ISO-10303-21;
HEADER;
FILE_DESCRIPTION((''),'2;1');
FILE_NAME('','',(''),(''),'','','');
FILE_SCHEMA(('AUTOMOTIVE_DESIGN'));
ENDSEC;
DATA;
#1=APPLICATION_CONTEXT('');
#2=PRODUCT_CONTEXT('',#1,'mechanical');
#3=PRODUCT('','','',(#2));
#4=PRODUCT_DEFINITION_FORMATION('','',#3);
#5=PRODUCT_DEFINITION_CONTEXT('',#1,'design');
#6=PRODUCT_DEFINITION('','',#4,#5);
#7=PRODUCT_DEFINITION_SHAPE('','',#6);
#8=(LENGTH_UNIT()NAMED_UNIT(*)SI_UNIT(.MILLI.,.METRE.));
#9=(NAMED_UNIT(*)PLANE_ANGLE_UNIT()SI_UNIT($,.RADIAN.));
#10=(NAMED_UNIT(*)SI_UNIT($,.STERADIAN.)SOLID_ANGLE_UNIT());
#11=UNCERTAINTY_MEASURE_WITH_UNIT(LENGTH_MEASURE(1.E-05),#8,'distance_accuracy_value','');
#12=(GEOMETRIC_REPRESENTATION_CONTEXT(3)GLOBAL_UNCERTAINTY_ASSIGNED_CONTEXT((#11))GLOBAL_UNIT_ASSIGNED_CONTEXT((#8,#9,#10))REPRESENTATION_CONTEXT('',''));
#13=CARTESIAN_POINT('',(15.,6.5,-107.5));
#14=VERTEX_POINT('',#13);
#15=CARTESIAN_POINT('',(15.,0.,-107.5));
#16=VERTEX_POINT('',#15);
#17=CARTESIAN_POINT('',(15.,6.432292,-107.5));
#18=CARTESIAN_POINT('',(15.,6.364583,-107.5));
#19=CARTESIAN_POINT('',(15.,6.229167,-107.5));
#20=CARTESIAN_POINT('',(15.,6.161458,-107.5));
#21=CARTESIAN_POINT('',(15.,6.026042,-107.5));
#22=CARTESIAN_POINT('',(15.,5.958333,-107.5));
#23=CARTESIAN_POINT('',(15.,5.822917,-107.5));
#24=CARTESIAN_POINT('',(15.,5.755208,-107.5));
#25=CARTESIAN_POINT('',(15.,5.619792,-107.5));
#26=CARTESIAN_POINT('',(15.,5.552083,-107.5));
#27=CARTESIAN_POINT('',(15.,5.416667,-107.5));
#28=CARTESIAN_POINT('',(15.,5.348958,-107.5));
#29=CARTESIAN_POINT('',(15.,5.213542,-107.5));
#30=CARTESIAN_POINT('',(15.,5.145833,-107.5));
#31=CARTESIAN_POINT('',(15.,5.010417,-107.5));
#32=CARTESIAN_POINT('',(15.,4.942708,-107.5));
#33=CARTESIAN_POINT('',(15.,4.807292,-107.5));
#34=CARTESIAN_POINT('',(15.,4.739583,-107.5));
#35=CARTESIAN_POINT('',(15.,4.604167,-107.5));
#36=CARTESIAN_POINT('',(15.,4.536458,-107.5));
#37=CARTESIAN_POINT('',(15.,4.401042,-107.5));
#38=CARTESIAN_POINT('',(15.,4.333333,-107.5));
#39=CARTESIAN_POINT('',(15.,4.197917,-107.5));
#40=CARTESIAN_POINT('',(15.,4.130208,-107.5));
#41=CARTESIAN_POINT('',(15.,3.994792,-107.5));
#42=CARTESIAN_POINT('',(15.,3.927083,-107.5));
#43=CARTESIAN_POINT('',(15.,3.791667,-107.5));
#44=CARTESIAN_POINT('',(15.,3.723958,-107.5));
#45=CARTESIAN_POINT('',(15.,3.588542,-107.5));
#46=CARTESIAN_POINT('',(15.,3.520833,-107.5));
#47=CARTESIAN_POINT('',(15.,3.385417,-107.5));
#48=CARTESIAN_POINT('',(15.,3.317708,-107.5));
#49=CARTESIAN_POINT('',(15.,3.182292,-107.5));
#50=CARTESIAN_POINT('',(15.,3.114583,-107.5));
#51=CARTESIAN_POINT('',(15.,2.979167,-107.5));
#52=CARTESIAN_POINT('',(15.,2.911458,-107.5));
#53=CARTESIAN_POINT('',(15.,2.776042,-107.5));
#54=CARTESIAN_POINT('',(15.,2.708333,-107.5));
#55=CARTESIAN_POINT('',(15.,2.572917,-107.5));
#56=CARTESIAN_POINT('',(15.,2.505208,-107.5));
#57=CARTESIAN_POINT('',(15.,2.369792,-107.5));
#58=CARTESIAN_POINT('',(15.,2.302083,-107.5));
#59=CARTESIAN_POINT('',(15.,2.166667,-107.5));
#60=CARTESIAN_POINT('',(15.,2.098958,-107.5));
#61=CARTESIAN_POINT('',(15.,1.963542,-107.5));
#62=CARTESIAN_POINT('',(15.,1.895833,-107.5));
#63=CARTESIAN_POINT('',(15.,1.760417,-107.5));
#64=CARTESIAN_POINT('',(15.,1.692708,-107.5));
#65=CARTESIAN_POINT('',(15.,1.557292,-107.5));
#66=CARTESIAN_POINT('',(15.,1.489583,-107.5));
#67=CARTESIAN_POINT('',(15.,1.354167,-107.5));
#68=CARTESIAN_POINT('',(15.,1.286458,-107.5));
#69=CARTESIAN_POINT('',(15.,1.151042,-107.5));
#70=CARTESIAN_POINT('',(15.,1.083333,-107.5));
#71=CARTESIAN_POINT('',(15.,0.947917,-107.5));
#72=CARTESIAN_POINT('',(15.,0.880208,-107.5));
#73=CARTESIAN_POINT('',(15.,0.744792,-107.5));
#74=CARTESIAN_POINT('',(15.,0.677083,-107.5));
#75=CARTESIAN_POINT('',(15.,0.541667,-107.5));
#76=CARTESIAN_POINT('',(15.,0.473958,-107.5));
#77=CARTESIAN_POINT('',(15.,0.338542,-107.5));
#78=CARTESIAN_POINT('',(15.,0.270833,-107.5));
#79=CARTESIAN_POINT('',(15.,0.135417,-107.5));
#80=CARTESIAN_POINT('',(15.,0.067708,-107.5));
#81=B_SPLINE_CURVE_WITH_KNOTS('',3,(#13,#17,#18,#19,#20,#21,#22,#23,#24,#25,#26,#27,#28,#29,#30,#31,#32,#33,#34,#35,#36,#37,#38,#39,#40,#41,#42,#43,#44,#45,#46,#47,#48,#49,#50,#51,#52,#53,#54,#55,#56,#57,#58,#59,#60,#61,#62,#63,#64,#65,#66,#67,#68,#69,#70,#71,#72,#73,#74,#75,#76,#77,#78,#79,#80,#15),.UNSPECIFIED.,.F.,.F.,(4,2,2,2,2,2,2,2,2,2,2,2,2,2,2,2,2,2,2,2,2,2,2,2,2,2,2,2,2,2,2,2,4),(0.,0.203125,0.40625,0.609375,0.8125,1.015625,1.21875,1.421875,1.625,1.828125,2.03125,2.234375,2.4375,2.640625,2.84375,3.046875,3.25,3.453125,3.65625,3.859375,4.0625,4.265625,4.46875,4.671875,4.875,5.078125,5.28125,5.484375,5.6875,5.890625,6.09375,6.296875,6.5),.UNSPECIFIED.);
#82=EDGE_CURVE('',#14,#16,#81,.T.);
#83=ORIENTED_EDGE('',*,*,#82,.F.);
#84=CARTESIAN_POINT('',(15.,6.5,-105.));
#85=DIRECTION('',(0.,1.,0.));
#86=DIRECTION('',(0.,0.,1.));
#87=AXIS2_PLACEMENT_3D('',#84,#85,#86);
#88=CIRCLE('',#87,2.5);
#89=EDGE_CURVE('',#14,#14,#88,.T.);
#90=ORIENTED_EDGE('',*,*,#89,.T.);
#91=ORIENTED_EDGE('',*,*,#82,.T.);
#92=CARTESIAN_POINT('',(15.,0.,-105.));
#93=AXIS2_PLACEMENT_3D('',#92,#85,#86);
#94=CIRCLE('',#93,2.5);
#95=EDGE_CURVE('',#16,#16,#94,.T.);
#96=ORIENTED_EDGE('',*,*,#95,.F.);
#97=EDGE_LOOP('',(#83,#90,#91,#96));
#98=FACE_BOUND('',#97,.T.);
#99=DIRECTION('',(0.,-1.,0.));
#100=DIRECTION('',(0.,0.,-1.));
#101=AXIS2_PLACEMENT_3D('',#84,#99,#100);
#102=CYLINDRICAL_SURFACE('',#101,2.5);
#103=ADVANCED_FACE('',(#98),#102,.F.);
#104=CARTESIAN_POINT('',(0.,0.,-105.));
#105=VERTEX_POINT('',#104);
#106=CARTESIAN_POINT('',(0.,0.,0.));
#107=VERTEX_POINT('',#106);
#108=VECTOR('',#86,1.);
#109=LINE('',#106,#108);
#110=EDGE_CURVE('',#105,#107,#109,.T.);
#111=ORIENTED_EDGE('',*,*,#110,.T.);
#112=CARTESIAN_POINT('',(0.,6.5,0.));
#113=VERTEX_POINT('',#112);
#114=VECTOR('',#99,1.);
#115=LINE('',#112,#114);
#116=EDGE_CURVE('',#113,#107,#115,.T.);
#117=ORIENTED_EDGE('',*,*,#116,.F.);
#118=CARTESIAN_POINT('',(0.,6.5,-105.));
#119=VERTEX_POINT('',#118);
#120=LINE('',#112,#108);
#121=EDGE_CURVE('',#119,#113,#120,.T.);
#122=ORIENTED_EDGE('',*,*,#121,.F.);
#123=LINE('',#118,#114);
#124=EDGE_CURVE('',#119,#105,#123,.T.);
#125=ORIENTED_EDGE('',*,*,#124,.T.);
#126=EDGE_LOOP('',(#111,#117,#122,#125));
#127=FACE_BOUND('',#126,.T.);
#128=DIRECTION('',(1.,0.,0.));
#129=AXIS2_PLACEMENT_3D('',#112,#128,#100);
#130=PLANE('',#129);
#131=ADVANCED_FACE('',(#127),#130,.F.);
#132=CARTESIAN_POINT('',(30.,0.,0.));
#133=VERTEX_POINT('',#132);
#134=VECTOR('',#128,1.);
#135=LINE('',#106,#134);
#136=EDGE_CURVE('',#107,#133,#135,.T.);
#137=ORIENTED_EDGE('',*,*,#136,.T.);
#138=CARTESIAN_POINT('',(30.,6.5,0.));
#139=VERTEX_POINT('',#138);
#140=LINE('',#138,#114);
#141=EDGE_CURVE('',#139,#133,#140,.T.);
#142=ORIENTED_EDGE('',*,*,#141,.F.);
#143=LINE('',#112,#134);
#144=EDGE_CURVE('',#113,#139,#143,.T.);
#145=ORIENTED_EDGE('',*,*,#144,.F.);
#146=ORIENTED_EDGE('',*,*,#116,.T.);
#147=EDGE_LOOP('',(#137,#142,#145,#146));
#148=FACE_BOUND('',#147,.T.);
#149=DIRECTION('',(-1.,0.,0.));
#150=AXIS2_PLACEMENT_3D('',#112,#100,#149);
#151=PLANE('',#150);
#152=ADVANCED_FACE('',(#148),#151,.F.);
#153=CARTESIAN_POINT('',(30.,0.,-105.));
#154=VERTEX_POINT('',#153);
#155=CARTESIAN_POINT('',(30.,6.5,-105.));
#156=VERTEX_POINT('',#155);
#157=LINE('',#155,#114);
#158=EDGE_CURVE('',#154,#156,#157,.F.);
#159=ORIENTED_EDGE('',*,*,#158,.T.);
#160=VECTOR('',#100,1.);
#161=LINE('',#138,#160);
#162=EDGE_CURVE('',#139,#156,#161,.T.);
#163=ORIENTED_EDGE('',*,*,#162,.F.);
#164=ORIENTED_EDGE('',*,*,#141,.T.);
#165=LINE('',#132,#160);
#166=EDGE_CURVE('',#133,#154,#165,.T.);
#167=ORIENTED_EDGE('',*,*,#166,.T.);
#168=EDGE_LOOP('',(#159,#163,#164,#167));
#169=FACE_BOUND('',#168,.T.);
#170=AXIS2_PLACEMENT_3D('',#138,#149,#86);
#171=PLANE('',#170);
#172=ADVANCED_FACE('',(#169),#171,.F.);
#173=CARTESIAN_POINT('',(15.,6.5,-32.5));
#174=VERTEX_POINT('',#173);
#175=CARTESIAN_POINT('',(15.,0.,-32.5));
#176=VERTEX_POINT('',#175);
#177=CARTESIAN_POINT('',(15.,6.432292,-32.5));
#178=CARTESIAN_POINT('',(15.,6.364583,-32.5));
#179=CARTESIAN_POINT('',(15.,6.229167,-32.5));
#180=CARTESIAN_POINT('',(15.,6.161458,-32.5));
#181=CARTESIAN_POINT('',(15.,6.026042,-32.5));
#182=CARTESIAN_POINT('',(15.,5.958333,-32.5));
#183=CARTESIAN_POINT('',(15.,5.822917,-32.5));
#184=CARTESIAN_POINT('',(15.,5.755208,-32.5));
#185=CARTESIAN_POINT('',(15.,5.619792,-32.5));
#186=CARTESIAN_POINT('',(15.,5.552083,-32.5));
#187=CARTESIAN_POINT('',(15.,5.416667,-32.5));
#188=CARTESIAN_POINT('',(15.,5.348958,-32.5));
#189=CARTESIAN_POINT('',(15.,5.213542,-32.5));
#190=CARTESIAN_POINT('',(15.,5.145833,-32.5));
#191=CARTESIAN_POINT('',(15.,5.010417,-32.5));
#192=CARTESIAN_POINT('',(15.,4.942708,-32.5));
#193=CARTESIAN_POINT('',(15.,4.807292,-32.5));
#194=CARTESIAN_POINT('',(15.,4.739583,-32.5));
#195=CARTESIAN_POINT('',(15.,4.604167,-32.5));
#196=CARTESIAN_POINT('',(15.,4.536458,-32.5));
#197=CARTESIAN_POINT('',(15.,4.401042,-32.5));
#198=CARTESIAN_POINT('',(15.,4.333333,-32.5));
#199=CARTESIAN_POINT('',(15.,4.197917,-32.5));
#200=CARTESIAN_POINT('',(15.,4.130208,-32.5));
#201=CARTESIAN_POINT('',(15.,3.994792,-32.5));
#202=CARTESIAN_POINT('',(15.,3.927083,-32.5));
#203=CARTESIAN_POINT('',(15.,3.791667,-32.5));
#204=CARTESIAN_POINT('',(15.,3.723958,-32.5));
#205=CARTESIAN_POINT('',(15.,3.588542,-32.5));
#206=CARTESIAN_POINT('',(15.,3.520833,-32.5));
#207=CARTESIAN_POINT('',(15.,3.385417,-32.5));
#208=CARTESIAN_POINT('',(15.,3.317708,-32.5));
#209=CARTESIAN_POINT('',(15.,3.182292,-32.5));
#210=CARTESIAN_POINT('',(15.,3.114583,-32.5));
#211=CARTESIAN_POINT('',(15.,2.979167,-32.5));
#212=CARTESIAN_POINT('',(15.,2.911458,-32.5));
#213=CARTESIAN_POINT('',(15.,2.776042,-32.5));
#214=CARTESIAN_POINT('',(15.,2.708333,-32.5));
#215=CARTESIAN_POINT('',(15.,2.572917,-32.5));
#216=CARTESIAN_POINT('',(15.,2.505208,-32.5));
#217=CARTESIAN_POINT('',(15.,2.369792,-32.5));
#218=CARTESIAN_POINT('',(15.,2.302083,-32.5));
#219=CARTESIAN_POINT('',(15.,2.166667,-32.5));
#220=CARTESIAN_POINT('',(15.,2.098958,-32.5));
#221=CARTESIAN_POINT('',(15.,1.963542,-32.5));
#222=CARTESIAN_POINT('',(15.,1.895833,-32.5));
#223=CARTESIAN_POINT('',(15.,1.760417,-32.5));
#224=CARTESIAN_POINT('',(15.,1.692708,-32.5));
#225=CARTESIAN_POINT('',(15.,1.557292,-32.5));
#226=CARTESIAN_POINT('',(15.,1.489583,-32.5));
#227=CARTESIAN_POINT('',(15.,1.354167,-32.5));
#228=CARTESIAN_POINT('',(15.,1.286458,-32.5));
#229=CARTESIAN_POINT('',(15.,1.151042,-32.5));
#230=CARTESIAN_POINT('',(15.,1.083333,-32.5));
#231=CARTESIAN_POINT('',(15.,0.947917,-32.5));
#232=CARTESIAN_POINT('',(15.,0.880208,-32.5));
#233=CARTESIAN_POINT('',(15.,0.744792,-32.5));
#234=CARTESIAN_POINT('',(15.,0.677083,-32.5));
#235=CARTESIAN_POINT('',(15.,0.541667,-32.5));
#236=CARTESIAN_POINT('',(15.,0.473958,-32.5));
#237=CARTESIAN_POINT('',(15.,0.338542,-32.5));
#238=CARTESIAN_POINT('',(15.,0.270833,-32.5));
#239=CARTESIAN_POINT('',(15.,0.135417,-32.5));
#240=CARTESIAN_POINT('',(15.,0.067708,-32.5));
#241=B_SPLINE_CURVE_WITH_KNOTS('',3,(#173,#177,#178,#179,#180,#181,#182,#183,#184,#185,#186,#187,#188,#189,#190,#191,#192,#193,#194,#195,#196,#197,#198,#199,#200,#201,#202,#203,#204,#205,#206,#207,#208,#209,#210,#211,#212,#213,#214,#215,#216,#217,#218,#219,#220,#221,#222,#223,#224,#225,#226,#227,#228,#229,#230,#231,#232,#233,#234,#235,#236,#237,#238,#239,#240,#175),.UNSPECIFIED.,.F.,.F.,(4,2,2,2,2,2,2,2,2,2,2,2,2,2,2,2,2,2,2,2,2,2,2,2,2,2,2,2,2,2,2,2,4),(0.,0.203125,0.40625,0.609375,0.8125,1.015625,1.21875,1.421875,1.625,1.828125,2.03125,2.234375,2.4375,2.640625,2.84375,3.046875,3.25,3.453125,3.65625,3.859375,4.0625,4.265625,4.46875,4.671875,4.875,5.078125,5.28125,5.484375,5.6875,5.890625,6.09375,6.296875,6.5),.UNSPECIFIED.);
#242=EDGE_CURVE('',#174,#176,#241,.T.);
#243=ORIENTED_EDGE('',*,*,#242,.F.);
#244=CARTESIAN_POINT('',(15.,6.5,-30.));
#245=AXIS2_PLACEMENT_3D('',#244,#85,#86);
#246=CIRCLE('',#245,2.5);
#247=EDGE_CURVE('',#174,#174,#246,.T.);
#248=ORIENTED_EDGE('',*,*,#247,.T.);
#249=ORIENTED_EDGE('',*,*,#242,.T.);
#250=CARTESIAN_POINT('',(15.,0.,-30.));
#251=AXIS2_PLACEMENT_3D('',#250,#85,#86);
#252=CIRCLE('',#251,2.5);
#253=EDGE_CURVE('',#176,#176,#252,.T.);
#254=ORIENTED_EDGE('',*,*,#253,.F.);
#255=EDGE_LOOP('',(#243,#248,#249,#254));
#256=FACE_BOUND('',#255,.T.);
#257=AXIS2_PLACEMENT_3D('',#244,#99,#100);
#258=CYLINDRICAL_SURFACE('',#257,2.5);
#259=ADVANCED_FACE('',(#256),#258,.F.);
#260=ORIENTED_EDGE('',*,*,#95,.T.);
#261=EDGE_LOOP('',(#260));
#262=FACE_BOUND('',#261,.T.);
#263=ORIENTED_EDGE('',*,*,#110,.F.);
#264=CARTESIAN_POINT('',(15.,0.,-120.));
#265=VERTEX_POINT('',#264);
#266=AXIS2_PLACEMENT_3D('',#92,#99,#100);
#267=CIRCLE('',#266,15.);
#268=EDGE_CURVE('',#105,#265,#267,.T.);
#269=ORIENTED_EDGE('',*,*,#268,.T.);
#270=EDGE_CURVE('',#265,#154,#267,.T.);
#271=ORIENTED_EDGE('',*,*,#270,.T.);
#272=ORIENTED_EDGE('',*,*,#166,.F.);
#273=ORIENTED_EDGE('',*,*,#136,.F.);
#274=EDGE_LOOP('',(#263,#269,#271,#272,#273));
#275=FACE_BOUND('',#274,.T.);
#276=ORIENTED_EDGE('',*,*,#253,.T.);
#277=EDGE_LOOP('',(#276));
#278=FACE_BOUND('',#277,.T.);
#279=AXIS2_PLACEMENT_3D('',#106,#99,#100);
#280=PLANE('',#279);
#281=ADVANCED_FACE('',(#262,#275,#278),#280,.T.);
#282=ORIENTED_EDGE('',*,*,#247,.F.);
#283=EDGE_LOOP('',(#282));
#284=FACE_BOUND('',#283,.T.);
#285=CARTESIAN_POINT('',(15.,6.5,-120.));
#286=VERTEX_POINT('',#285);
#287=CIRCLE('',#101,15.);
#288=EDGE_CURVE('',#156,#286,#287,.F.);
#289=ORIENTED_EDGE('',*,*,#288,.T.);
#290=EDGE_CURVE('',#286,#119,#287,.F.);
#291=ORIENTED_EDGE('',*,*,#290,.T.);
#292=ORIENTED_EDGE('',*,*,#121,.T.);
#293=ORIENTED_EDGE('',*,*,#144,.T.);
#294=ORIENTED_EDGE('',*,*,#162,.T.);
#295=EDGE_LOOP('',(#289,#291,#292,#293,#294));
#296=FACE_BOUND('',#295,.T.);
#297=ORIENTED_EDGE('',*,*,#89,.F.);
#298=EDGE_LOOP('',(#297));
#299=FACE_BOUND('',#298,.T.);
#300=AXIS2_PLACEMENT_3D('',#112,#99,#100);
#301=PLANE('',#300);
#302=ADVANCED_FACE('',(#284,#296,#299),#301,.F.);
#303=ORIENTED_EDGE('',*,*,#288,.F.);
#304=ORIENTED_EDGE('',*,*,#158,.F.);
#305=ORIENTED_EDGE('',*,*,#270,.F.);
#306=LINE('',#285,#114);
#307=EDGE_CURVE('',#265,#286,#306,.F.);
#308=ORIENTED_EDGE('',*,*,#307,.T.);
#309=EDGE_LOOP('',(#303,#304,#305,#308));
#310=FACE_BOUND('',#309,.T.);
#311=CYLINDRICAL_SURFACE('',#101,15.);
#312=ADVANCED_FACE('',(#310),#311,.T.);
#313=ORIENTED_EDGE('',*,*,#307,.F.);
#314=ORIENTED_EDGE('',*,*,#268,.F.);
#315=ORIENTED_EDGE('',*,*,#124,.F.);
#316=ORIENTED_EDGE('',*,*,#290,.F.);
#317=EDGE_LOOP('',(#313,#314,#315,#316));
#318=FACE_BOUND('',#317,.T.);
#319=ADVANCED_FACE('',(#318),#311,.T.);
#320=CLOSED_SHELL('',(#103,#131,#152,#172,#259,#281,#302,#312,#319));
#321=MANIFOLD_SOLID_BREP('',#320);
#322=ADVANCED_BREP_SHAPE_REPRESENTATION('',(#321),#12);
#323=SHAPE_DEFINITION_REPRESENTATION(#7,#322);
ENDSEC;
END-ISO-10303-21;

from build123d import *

# Parameters (mm, degrees)
SKETCH1_W           = 30
SKETCH1_H           = 120
SKETCH1_R           = 2.5
BOSS_EXTRUDE1_DEPTH = 6.5
FILLET1_R           = 15


with BuildPart() as part:
    # Sketch1 → Boss-Extrude1 (new body)
    with BuildSketch(Plane(origin=(0, 0, 0), x_dir=(1, 0, 0), z_dir=(0, 1, 0))):
        with Locations((15, 60)):
            Rectangle(SKETCH1_W, SKETCH1_H)
        with Locations(Location((15, 30, 0), (0, 0, 90))):
            Circle(SKETCH1_R, mode=Mode.SUBTRACT)
        with Locations(Location((15, 105, 0), (0, 0, 90))):
            Circle(SKETCH1_R, mode=Mode.SUBTRACT)
    extrude(amount=BOSS_EXTRUDE1_DEPTH)

    # Fillet1
    fillet1_edges = [part.edges().sort_by_distance(p)[0] for p in [
        (30, 3.25, -120),
        (0, 3.25, -120),
    ]]
    fillet(fillet1_edges, radius=FILLET1_R - 0.0001)  # a hair under: the kernel refuses the full size


solid = part.part
